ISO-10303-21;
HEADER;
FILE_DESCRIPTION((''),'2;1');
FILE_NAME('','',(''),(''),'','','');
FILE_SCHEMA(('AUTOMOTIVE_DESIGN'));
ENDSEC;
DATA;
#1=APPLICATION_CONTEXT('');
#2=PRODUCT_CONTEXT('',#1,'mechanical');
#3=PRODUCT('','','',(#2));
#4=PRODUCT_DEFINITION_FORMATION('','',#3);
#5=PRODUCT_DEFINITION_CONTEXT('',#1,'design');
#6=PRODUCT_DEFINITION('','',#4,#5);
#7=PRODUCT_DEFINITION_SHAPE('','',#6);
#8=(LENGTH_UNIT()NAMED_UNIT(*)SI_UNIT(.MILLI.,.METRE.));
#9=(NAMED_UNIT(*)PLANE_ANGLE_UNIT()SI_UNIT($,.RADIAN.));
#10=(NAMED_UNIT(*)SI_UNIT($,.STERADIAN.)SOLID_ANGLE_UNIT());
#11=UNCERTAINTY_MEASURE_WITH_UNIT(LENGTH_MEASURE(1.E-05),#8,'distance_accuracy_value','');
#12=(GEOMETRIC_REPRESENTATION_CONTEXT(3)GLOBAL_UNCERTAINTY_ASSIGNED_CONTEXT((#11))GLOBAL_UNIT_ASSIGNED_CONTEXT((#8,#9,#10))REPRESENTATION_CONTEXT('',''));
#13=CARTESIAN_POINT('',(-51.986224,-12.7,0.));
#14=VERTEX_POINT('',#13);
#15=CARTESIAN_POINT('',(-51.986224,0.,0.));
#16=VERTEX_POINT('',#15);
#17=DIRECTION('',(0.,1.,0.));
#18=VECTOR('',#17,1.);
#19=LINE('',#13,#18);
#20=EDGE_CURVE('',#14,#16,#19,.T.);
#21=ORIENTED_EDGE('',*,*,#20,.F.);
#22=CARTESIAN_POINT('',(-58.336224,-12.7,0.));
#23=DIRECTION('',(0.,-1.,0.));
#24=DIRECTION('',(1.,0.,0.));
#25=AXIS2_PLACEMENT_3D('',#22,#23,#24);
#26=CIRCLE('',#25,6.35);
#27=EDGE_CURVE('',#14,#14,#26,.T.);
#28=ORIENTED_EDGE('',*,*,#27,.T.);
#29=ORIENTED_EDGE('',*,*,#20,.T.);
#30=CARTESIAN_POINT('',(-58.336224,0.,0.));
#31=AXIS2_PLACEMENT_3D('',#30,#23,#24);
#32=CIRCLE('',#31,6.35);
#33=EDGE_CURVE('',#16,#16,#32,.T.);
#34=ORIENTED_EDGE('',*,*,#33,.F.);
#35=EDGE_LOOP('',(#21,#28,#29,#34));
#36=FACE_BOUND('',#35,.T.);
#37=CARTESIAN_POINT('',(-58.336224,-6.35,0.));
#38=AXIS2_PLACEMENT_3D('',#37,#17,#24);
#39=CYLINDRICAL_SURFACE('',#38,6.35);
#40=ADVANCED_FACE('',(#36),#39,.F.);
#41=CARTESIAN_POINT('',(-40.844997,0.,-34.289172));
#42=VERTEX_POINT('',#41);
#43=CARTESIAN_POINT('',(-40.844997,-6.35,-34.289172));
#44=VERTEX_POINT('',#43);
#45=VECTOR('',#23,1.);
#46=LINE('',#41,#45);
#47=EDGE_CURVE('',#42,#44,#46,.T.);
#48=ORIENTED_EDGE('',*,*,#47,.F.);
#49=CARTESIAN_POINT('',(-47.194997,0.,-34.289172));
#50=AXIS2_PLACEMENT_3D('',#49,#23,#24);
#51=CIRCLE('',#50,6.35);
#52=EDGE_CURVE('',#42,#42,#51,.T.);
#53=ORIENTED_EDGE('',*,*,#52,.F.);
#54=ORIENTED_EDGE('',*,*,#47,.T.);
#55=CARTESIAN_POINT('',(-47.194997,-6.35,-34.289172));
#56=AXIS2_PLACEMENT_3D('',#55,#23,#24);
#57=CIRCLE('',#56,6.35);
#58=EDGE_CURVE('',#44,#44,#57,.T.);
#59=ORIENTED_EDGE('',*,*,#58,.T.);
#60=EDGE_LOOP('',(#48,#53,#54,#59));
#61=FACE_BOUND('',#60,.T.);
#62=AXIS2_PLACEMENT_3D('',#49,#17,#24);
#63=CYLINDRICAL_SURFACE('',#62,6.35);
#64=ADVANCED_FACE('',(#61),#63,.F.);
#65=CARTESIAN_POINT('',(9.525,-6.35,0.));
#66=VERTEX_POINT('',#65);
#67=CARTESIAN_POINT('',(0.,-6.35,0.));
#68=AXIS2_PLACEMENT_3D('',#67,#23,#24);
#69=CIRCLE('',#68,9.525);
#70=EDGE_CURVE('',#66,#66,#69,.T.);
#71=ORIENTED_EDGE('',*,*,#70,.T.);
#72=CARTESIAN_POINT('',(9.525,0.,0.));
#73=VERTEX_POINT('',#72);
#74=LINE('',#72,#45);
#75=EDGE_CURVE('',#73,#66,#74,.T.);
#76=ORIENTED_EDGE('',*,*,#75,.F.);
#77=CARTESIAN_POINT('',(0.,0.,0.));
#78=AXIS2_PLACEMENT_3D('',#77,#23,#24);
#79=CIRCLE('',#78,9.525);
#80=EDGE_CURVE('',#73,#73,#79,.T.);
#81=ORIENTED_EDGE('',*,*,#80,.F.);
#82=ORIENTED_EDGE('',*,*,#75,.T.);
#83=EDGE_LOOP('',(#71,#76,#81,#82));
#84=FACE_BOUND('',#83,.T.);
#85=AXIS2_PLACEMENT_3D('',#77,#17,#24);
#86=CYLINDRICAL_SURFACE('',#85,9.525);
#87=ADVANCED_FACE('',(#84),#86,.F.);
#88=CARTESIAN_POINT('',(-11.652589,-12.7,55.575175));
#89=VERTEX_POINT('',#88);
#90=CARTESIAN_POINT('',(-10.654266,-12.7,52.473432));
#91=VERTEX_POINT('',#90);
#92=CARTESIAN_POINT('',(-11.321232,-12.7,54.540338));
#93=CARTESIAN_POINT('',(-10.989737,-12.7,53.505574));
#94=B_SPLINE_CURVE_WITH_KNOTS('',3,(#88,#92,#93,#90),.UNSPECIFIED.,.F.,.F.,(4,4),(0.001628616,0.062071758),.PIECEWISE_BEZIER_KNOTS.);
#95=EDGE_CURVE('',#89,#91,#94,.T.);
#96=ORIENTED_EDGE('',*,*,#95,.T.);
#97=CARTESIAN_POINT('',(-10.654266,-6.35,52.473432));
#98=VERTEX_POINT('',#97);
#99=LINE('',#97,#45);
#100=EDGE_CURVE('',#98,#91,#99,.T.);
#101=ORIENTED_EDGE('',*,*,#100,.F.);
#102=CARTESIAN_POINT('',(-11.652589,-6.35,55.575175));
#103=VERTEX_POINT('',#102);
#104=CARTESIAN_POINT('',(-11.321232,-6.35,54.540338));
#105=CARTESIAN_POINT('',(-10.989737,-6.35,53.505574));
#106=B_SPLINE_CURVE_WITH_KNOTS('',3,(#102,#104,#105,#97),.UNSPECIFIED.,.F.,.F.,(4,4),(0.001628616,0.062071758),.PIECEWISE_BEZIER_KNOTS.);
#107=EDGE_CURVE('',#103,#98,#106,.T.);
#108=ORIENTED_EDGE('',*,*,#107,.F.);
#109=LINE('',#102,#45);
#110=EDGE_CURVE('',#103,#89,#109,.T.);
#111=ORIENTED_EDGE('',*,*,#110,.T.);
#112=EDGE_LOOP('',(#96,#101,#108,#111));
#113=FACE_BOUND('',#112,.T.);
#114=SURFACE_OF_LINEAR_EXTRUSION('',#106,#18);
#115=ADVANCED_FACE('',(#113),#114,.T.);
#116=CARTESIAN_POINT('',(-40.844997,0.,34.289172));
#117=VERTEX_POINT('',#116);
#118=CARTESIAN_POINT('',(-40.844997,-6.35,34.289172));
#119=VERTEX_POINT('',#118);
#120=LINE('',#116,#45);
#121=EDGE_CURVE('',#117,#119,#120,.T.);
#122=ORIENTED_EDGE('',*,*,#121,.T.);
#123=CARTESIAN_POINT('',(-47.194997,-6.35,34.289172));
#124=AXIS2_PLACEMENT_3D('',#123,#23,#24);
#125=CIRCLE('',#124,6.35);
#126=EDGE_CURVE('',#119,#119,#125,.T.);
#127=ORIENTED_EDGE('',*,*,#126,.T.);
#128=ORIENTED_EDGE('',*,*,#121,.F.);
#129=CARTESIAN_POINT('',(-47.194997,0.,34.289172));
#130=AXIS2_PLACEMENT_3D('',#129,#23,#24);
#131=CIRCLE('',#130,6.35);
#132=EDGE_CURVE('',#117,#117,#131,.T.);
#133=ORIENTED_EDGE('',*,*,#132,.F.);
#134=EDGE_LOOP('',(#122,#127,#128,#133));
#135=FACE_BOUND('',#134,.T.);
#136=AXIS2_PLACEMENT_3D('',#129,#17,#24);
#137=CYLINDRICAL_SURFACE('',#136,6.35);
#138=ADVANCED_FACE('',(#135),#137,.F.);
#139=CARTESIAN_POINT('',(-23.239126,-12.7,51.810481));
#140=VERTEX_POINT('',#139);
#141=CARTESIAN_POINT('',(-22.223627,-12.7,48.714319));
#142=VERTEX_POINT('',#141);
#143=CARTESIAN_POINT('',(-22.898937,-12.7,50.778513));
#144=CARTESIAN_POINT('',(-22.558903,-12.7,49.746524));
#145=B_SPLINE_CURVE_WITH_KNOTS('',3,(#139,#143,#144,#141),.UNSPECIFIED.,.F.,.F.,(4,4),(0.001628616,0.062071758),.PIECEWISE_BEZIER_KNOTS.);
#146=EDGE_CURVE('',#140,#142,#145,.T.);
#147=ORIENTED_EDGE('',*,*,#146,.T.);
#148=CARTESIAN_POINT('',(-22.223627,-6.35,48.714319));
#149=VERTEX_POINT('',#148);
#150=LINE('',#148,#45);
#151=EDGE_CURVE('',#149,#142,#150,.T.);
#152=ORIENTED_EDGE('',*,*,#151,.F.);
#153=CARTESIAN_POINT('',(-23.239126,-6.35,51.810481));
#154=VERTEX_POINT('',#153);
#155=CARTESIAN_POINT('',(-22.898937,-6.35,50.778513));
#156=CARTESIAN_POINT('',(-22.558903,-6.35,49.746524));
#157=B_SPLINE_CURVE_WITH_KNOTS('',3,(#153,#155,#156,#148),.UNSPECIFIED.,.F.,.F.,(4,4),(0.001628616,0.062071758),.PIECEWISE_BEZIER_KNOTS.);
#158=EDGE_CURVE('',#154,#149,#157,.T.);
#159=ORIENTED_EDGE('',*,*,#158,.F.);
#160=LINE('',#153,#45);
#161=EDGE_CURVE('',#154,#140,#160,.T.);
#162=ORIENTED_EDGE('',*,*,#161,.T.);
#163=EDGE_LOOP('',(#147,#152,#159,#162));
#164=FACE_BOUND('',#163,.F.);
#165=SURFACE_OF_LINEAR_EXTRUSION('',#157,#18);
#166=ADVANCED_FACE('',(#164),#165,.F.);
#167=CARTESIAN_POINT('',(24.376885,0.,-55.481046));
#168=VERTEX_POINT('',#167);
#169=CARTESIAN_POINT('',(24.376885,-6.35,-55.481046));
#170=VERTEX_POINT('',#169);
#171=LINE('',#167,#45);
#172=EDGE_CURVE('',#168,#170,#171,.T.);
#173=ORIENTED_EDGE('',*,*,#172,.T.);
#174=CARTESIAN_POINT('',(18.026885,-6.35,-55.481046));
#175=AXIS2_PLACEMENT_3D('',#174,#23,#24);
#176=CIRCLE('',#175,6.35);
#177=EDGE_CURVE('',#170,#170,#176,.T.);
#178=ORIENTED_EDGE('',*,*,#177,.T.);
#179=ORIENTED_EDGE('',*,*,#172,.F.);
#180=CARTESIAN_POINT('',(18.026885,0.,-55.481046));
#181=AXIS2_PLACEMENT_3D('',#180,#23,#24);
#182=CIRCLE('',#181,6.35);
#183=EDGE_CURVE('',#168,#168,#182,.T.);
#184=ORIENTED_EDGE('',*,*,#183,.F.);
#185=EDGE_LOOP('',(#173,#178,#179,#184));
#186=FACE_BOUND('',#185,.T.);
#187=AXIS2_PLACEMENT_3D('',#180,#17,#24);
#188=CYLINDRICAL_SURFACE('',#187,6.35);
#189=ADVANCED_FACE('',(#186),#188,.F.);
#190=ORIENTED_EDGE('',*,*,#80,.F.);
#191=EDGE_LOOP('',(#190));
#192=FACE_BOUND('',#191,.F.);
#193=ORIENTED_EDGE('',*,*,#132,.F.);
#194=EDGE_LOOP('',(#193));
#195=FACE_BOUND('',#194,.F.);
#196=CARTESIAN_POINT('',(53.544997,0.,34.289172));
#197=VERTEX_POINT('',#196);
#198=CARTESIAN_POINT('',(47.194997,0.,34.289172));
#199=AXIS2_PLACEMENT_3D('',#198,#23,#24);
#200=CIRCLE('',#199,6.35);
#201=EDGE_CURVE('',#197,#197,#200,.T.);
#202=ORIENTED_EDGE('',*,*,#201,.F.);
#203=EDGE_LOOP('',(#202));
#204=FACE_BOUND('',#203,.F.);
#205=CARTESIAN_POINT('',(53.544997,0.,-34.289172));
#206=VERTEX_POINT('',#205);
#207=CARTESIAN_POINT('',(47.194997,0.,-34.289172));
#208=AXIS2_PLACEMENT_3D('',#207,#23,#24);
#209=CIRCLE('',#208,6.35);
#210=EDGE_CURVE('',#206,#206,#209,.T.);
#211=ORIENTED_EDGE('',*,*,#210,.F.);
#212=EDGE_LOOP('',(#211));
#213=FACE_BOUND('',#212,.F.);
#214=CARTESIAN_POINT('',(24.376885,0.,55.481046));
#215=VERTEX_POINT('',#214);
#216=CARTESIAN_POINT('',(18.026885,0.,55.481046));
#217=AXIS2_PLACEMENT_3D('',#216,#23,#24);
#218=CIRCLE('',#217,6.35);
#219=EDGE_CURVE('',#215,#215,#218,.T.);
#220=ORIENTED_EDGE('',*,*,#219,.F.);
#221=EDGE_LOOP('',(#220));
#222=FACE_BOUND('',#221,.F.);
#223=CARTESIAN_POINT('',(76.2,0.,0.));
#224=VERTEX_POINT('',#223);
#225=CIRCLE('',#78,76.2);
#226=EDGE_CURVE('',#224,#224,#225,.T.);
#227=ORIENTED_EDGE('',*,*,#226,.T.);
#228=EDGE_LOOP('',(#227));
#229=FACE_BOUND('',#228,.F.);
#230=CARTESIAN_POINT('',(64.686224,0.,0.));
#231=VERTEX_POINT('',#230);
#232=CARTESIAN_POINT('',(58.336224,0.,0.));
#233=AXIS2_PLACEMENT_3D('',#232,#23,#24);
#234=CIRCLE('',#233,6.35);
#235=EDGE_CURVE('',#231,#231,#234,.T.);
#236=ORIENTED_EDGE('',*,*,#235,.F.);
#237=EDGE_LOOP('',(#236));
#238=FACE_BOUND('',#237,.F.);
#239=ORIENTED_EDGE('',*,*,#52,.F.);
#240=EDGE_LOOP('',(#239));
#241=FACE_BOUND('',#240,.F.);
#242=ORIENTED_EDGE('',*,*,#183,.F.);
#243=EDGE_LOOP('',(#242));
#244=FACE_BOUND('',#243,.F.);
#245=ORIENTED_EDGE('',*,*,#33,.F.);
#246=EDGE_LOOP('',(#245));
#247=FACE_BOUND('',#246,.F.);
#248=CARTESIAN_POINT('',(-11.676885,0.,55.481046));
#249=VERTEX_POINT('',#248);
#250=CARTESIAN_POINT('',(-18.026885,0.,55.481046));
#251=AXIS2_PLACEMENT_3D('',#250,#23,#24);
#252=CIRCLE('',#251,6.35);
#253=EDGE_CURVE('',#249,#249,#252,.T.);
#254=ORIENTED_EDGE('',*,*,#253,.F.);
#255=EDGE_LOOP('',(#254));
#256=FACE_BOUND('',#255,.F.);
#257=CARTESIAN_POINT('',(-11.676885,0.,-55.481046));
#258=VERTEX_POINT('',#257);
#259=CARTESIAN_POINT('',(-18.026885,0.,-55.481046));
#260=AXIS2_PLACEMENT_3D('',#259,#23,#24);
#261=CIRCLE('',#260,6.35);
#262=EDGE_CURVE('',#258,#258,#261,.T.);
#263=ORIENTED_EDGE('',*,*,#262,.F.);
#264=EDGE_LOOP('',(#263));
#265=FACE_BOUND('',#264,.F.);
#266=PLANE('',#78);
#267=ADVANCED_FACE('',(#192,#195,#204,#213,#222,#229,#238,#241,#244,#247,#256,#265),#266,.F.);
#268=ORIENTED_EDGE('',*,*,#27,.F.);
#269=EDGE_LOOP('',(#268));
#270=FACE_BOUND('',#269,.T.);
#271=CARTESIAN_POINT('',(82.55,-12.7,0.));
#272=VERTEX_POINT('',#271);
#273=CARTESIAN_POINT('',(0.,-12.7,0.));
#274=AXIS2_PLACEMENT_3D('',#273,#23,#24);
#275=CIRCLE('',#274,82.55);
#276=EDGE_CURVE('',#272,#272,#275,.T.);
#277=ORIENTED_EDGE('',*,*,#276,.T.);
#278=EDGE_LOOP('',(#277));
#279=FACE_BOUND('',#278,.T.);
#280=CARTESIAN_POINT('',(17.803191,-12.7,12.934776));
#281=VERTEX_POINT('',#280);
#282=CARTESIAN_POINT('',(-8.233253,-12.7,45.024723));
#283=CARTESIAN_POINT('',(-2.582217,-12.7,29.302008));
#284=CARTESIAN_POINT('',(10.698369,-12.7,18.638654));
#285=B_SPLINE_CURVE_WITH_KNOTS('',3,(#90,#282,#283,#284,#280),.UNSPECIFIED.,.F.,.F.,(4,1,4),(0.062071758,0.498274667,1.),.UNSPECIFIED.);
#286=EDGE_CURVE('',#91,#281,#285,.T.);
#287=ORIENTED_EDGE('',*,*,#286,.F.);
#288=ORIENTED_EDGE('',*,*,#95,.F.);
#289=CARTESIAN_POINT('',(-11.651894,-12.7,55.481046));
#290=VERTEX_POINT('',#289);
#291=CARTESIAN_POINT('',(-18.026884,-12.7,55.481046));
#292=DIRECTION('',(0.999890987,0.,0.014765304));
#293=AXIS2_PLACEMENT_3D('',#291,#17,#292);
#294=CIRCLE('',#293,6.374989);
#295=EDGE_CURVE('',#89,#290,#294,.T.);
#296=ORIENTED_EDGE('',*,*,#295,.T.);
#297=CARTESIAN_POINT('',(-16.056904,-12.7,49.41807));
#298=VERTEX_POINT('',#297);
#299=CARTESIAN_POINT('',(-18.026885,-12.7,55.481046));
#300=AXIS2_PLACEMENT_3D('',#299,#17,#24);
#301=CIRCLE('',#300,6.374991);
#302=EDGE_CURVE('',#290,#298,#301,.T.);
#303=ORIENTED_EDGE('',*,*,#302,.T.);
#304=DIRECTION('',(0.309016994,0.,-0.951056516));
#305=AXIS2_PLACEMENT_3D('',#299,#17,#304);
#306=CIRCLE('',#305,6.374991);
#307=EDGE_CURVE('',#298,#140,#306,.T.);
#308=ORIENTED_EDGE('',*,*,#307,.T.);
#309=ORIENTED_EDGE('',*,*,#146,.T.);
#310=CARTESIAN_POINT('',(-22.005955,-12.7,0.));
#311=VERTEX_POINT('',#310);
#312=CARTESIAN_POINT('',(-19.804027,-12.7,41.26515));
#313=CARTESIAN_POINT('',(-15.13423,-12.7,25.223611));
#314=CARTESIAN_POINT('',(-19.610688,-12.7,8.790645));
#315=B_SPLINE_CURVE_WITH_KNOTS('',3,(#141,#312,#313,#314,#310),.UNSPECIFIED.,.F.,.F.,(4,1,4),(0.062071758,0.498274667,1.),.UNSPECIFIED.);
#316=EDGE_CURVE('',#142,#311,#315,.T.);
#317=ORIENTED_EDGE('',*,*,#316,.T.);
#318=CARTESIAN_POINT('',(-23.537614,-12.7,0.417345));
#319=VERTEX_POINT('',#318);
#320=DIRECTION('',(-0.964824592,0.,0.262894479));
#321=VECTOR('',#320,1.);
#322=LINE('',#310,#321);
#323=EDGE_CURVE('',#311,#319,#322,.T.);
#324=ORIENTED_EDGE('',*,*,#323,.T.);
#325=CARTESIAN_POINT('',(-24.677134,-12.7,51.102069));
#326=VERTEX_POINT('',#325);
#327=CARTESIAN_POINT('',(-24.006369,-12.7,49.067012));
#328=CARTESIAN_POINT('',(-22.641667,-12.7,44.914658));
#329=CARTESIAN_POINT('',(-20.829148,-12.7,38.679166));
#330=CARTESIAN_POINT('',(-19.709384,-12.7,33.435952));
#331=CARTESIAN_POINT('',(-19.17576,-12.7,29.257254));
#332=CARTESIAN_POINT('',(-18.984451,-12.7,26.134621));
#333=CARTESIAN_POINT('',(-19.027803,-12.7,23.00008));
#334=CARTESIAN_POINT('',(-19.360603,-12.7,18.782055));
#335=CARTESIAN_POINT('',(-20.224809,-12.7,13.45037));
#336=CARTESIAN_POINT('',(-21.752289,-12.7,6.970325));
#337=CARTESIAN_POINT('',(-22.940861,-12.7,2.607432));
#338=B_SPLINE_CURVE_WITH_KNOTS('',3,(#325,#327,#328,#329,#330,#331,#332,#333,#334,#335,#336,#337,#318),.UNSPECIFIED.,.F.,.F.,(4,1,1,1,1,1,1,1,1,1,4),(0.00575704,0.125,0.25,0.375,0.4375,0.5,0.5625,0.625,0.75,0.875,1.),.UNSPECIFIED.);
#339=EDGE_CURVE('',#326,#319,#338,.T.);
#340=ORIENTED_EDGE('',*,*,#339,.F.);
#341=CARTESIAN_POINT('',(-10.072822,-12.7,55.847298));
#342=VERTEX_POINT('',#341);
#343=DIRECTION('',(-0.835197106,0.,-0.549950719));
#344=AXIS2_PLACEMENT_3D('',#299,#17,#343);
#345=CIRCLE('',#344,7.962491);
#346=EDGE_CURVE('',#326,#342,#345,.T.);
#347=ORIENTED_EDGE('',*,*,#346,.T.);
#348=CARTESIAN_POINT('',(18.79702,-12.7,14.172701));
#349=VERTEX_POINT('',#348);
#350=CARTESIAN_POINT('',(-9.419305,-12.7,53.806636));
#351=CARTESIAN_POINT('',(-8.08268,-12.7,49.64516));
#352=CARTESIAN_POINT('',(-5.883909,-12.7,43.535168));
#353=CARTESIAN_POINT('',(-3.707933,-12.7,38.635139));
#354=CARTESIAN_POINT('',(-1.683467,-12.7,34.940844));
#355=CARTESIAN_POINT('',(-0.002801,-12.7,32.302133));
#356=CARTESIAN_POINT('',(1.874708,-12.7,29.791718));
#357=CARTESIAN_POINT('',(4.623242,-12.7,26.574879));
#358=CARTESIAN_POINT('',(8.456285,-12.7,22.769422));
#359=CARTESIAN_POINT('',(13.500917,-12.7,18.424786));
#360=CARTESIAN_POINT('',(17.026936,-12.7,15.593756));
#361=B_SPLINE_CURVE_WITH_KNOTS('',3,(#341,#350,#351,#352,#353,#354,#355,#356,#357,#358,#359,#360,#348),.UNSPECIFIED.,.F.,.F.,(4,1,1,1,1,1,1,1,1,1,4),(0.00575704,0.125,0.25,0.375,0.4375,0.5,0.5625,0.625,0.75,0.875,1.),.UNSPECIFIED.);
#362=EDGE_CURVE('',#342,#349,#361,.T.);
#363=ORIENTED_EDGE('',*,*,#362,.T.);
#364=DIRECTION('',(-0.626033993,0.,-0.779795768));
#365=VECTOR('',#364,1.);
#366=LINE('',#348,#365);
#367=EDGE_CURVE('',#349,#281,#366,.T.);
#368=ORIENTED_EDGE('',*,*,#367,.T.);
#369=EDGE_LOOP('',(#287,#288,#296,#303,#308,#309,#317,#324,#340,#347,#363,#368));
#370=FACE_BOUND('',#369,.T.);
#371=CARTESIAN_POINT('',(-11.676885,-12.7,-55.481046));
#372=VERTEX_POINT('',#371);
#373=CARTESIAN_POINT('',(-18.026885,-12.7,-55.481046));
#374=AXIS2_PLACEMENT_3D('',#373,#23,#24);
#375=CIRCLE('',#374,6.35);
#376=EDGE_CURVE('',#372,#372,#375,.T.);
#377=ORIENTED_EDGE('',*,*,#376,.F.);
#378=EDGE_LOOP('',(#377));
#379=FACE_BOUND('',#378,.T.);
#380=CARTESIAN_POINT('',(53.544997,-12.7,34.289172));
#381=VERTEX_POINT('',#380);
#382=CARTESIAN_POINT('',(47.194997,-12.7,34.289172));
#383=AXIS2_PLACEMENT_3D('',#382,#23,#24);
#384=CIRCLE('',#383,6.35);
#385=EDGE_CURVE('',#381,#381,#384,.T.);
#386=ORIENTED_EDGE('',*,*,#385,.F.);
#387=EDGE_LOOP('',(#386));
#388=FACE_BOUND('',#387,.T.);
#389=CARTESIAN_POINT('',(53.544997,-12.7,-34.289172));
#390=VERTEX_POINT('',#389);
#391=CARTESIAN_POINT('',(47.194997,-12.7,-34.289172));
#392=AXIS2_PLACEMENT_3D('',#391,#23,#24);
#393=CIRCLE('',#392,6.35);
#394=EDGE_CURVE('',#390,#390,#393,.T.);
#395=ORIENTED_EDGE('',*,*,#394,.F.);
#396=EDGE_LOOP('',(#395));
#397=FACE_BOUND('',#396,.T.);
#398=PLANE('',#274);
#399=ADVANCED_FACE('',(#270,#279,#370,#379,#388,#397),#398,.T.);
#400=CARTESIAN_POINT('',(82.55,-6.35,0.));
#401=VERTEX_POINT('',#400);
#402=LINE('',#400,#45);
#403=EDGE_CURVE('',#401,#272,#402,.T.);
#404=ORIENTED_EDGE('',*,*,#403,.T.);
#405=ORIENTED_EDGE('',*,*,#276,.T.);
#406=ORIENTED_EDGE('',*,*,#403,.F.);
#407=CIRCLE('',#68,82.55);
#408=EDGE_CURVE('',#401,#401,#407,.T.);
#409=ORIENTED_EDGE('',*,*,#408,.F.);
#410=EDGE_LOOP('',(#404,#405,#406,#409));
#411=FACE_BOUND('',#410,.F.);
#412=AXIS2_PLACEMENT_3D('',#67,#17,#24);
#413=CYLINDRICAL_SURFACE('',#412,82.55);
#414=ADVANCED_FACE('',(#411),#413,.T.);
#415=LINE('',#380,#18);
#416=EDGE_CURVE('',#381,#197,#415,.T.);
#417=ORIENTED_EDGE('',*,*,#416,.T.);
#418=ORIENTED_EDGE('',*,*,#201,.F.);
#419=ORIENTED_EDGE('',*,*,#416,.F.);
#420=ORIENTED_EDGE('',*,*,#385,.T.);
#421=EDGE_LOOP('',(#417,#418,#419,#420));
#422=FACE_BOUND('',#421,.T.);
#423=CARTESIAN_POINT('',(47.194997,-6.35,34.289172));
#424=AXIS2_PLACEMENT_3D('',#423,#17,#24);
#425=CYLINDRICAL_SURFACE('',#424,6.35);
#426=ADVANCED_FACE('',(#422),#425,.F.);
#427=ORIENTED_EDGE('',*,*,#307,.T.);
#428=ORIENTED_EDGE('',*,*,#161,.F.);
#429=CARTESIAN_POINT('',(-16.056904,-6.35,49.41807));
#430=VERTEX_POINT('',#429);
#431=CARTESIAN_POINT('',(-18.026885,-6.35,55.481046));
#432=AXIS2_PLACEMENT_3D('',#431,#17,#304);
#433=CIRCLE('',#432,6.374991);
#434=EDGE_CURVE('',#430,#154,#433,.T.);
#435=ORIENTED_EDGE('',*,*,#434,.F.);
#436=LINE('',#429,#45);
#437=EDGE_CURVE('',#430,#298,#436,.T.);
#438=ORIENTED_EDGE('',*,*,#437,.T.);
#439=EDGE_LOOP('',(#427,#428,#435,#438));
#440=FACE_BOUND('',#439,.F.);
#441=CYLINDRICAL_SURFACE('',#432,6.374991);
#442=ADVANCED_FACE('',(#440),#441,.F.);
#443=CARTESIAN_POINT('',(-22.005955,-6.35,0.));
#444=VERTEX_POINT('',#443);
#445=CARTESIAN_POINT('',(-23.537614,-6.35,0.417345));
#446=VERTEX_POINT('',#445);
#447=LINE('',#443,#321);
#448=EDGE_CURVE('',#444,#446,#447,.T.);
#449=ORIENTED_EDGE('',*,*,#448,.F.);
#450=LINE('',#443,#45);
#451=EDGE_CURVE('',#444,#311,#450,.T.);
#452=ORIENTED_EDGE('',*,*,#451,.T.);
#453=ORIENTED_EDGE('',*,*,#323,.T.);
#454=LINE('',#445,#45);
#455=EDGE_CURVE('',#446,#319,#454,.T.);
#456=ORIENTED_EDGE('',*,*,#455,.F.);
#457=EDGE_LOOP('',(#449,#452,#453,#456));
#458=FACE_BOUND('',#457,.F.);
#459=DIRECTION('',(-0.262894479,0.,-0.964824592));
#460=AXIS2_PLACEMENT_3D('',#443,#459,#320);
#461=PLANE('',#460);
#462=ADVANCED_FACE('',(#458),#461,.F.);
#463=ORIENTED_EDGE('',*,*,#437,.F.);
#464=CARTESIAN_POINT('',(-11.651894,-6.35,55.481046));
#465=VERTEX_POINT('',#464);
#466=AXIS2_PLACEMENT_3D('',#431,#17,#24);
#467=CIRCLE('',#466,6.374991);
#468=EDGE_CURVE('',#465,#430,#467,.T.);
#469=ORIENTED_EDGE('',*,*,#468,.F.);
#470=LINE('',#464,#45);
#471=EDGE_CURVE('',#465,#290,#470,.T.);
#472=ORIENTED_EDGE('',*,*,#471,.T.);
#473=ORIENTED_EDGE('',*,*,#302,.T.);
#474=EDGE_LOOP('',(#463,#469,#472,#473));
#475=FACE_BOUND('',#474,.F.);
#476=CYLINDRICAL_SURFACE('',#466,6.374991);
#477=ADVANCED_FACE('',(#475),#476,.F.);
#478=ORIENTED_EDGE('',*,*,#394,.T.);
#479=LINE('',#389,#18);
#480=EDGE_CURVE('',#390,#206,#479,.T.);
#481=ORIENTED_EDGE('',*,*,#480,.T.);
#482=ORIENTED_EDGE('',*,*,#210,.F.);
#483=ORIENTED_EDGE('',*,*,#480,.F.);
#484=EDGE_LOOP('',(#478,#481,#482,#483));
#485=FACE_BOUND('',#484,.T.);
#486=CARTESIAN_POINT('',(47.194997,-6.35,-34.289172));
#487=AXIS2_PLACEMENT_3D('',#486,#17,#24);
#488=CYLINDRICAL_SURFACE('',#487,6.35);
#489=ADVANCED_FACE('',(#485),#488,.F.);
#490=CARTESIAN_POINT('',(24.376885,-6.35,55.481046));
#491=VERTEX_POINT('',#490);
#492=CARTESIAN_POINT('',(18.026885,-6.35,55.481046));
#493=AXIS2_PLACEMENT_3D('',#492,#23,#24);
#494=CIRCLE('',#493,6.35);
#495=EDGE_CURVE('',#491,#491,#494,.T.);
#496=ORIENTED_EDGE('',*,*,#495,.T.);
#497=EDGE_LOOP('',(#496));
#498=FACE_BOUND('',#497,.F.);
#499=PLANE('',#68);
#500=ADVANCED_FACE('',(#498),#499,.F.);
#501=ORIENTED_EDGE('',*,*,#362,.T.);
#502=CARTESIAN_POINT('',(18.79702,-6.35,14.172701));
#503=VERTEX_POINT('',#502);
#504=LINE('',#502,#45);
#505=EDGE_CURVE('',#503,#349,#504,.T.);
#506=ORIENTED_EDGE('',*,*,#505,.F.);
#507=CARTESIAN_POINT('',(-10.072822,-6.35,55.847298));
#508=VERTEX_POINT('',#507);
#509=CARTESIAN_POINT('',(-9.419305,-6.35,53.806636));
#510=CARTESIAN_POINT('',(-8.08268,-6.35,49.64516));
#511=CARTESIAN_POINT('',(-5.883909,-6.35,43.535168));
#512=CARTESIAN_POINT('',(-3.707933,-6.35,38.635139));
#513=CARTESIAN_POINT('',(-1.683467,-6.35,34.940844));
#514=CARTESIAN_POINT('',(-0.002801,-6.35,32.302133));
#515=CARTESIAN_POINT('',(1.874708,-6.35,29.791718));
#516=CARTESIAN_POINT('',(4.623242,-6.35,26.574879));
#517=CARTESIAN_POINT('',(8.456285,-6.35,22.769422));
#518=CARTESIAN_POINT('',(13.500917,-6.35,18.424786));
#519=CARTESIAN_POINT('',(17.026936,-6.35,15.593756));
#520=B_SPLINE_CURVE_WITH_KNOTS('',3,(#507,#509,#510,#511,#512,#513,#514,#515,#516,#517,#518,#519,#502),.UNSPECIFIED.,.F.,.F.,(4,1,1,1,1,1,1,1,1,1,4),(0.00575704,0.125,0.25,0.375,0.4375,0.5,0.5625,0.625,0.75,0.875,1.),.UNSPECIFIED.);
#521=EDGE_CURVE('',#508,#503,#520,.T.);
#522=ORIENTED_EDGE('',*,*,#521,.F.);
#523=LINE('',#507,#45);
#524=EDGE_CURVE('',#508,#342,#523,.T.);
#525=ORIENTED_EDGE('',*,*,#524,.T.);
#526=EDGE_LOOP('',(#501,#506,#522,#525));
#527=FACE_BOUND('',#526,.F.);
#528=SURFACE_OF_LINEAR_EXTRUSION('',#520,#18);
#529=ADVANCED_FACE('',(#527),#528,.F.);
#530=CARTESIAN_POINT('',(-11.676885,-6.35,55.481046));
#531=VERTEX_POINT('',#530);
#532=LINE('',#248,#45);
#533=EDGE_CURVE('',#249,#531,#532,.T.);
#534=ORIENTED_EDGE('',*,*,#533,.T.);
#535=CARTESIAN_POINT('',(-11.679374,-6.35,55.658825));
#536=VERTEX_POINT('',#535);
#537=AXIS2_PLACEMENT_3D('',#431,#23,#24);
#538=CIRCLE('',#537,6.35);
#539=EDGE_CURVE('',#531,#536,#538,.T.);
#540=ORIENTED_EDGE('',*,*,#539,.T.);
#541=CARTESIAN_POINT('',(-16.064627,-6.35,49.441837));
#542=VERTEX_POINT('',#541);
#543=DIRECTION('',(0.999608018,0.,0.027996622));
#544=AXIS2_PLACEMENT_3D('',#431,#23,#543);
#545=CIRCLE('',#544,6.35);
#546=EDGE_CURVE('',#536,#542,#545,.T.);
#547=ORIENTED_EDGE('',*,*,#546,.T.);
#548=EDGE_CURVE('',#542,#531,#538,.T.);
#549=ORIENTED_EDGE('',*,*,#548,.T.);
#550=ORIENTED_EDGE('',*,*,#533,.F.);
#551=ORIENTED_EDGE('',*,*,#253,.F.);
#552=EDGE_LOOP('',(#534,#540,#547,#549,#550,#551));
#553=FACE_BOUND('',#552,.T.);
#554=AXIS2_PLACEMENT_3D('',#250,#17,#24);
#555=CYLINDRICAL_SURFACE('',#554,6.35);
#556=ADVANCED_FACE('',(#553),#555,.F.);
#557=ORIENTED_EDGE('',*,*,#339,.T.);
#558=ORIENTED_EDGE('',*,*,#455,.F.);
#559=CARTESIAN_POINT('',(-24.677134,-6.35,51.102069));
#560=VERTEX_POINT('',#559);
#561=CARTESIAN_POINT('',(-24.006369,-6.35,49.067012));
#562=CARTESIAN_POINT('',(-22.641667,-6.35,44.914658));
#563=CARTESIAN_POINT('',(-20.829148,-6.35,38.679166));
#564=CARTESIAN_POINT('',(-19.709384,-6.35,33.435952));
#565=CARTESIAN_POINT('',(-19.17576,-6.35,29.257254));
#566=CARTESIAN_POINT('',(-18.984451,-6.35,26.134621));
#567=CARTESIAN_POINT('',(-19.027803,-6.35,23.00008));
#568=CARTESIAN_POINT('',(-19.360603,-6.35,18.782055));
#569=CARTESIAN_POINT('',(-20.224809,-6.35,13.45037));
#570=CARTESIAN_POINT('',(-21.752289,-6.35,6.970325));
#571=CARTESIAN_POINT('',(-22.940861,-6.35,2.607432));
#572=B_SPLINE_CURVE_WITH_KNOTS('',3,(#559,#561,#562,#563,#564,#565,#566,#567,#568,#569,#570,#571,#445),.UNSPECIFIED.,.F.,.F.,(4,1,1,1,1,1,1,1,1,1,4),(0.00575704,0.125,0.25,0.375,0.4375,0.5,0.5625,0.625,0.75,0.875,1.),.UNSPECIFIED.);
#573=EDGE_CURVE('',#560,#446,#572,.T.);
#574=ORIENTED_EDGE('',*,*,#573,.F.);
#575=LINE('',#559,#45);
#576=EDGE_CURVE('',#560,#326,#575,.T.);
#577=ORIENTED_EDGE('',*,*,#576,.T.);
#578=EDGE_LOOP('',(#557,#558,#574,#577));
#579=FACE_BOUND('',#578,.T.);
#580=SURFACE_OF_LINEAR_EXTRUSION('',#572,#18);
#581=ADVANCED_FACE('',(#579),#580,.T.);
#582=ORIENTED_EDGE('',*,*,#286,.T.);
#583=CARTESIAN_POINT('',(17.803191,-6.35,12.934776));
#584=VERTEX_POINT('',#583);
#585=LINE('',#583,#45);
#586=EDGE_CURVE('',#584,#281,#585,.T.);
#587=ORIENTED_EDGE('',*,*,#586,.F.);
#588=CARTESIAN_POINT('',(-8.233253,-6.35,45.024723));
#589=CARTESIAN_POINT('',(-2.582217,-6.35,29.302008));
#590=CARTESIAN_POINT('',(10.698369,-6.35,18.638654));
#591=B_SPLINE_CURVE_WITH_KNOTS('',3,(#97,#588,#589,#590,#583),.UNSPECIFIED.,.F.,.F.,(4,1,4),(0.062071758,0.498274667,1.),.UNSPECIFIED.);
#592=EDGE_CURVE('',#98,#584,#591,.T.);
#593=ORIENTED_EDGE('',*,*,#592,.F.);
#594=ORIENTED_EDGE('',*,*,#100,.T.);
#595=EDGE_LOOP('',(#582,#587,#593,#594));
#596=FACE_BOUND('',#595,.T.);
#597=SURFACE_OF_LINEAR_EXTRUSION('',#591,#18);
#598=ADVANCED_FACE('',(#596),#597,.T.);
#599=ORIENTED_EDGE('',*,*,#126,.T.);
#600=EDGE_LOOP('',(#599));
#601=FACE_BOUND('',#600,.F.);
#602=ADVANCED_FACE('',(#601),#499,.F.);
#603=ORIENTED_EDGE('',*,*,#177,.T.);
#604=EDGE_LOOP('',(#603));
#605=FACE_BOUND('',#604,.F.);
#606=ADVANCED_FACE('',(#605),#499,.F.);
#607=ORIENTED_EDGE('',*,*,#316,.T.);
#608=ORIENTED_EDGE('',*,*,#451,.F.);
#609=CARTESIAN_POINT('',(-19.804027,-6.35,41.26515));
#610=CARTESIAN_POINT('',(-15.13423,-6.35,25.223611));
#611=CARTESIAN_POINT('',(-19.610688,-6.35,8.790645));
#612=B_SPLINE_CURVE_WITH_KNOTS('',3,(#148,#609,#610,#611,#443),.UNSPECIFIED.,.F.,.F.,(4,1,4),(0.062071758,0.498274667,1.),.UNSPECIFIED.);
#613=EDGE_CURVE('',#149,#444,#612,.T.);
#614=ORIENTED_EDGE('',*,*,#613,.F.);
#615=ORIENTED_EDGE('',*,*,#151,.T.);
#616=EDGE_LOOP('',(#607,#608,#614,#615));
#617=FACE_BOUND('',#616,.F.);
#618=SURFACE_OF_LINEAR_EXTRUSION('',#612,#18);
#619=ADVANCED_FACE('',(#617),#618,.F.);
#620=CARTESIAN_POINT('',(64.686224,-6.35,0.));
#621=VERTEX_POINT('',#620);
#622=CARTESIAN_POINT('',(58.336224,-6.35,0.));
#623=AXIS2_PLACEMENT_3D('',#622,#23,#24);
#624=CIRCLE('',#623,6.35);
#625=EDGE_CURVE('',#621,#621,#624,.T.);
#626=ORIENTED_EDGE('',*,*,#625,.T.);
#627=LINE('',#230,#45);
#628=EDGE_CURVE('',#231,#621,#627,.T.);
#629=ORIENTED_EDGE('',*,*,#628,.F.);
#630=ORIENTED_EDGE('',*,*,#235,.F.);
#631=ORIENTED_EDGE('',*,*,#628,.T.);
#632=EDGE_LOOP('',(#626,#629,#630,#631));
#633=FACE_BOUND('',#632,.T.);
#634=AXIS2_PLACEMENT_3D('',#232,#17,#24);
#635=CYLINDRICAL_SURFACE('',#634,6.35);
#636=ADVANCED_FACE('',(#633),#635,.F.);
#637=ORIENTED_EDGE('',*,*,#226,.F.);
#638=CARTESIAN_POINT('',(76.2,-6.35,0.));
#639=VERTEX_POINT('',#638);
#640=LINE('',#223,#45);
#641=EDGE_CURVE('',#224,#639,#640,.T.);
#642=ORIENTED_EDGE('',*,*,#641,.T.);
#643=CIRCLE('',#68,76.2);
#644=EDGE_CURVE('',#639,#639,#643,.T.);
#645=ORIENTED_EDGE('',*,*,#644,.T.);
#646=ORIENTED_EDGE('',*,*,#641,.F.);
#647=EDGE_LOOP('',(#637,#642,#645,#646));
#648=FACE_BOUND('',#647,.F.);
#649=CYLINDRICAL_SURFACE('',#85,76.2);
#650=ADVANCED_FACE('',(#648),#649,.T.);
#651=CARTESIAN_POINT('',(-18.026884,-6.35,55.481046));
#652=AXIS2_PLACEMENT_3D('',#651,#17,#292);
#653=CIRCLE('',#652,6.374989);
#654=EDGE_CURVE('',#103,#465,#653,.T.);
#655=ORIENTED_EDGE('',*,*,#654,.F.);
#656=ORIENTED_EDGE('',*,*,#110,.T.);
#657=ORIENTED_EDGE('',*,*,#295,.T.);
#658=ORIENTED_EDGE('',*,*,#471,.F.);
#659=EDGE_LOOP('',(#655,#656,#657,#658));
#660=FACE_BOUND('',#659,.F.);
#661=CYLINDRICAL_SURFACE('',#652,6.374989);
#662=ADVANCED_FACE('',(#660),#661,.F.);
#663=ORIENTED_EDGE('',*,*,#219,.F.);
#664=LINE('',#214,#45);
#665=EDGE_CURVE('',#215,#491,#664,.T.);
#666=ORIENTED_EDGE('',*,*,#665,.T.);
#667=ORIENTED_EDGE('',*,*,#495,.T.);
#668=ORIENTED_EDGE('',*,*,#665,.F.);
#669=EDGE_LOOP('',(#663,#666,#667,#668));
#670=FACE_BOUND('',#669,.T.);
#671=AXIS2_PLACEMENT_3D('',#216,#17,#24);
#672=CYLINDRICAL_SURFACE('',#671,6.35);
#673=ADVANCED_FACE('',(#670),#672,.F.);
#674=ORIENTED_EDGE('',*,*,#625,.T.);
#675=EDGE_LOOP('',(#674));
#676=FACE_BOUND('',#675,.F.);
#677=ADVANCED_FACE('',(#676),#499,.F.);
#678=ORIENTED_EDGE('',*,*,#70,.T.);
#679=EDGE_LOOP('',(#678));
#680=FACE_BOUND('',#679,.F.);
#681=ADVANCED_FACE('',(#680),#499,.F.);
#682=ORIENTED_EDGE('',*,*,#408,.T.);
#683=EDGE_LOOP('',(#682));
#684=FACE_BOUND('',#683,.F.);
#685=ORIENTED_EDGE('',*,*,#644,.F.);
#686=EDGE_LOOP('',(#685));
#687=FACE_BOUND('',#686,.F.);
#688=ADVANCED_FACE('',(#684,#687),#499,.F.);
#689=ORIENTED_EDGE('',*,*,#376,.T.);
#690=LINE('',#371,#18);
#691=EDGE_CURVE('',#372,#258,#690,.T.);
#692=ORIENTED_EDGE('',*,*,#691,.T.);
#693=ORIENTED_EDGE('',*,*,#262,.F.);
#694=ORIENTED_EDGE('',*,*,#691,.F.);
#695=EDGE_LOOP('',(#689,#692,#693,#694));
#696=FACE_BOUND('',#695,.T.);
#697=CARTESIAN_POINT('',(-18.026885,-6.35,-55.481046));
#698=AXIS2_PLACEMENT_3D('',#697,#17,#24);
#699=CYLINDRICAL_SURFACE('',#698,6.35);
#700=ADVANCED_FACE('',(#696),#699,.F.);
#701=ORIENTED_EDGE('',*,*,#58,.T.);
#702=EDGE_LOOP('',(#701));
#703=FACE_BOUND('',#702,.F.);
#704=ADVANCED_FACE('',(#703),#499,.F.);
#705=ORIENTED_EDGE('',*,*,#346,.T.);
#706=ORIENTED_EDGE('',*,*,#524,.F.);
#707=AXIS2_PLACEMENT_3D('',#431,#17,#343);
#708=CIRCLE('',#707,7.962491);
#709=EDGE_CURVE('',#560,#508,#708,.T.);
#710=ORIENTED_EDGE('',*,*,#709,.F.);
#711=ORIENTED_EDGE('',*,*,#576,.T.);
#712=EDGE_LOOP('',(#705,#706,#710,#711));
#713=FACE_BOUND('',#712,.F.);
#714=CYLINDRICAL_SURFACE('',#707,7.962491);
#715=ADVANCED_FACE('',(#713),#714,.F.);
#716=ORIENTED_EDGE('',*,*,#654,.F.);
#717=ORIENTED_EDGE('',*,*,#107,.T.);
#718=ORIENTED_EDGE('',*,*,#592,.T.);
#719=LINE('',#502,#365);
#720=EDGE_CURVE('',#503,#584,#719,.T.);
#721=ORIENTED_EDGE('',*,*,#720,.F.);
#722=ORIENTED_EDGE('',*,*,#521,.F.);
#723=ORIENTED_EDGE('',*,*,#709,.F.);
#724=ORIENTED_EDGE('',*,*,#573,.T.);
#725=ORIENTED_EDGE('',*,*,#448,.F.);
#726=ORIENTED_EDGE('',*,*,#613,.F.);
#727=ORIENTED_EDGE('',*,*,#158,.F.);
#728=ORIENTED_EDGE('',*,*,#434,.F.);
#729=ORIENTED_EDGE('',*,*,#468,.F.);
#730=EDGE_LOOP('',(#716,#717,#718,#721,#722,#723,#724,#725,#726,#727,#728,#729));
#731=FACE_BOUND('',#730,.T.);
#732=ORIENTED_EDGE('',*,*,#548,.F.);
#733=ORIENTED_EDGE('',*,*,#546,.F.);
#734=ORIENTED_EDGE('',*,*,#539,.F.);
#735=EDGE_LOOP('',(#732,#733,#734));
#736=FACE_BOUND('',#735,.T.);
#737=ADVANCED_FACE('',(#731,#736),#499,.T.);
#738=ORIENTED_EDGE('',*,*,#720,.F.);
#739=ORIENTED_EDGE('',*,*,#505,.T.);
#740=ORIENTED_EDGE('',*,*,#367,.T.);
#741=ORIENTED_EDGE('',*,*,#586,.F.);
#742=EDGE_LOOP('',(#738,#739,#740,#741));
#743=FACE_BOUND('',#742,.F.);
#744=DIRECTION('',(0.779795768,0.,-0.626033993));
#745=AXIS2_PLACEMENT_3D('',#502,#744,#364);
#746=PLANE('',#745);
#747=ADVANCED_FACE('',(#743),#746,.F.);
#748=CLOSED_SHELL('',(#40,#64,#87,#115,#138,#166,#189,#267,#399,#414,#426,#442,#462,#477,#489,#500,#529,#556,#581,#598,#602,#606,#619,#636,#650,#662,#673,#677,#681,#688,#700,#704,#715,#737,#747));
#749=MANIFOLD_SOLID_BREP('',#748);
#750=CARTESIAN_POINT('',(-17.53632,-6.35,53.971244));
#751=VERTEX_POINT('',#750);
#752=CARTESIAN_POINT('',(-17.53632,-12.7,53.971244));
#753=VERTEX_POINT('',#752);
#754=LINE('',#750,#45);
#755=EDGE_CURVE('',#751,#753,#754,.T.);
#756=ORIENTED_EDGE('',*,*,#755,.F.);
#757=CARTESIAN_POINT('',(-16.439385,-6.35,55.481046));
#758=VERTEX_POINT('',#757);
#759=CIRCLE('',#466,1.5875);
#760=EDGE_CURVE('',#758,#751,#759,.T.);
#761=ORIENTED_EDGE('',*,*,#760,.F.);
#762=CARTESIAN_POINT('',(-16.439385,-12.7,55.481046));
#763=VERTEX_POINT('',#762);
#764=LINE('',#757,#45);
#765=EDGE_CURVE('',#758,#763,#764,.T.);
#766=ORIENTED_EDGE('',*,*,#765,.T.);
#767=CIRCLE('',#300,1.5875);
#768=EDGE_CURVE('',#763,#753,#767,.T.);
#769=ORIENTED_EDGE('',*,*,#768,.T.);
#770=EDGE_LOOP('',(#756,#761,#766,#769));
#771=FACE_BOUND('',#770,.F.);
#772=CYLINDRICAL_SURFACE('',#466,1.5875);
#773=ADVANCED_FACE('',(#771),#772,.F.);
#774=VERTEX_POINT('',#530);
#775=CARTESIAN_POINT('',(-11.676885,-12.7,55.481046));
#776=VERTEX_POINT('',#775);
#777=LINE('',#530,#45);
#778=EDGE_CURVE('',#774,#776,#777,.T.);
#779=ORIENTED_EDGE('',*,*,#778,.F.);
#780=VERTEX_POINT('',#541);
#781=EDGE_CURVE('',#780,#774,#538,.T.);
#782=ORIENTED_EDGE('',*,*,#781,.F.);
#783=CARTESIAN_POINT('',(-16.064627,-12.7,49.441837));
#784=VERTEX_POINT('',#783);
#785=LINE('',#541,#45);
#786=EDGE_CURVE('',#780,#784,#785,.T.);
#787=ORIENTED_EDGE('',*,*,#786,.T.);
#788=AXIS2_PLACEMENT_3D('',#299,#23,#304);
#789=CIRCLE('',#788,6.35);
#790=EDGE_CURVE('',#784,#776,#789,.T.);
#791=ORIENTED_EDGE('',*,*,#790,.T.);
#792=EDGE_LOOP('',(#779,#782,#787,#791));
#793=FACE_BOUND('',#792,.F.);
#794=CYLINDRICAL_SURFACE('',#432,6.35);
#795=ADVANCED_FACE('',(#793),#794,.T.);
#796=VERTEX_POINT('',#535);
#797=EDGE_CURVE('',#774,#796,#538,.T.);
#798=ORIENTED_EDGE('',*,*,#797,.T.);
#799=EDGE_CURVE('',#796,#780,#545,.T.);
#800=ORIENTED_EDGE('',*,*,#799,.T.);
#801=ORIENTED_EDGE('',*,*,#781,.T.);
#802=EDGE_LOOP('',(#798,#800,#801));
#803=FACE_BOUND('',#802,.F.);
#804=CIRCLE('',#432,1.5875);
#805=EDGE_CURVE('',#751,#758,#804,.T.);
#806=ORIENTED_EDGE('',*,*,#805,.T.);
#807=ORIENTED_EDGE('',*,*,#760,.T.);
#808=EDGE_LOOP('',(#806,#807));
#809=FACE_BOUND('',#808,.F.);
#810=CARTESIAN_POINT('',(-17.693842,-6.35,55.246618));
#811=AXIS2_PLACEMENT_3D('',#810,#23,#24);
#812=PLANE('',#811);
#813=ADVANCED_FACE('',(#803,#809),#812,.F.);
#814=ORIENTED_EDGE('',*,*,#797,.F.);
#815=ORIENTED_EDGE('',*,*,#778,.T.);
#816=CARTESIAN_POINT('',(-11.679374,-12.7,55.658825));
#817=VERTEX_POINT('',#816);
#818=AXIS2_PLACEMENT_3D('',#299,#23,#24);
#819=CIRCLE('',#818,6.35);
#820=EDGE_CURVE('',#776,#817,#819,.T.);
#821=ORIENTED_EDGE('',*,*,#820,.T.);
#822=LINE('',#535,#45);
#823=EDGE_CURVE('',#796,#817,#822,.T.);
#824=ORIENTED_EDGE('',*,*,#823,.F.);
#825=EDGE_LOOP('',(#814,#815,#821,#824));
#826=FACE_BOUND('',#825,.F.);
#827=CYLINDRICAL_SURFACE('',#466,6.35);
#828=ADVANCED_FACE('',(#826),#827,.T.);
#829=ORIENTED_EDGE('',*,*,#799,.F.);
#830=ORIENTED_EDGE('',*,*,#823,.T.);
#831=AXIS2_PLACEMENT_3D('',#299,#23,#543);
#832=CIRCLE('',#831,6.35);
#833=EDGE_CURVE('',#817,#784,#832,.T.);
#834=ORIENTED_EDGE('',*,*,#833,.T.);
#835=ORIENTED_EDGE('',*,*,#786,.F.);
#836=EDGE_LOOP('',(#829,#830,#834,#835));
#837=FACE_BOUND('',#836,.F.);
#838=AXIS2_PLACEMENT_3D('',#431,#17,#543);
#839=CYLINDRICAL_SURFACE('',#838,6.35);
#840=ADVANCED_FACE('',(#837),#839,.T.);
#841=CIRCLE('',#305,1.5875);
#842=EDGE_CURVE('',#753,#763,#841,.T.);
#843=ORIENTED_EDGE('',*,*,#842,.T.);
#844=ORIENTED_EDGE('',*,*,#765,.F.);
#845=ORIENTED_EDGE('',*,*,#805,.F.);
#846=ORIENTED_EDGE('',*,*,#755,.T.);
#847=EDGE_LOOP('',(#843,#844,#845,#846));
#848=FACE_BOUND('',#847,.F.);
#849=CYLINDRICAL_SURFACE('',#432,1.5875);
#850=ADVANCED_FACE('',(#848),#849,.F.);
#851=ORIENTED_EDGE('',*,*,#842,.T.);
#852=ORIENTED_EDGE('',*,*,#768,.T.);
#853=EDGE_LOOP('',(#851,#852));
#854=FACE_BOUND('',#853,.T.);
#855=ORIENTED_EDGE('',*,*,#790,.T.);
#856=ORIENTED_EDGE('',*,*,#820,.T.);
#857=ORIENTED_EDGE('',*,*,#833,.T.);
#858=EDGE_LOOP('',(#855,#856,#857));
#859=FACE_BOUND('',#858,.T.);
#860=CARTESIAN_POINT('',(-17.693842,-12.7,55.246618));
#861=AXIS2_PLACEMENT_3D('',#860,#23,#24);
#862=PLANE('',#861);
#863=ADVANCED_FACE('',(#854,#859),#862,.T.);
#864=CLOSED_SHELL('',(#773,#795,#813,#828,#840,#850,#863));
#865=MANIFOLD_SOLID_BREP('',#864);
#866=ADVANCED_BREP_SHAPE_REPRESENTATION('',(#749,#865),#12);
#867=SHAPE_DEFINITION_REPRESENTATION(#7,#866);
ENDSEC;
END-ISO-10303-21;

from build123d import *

# Parameters (mm, degrees)
F0_R     = 76.2
F0_R_2   = 6.35
F0_R_3   = 9.525
F1_DEPTH = 6.35
F2_R     = 82.55
F2_R_2   = 76.2
F2_R_3   = 6.35
F3_DEPTH = 6.35


# Not quite as in the source:
# - a length typed as a fraction of an inch, garbled in the dataset ("3 / 203.2 mm" for 3/8 in), is restored
# - the dataset's text gives a spline's control points without its knots; the knots are read off the source's solid


with BuildPart() as f1:
    # F0 (on Front) → F1 (new body)
    with BuildSketch(Plane.XZ):
        Circle(F0_R)
        with Locations((-18.0268847294, -55.4810463583)):
            Circle(F0_R_2, mode=Mode.SUBTRACT)
        with Locations((-47.1949969329, -34.2891723808)):
            Circle(F0_R_2, mode=Mode.SUBTRACT)
        with Locations((18.0268847294, -55.4810463583)):
            Circle(F0_R_2, mode=Mode.SUBTRACT)
        with Locations((47.1949969329, -34.2891723808)):
            Circle(F0_R_2, mode=Mode.SUBTRACT)
        with Locations((-58.336224407, 0)):
            Circle(F0_R_2, mode=Mode.SUBTRACT)
        with Locations((-47.1949969329, 34.2891723808)):
            Circle(F0_R_2, mode=Mode.SUBTRACT)
        with Locations((-18.0268847294, 55.4810463583)):
            Circle(F0_R_2, mode=Mode.SUBTRACT)
        Circle(F0_R_3, mode=Mode.SUBTRACT)
        with Locations((58.336224407, 0)):
            Circle(F0_R_2, mode=Mode.SUBTRACT)
        with Locations((47.1949969329, 34.2891723808)):
            Circle(F0_R_2, mode=Mode.SUBTRACT)
        with Locations((18.0268847294, 55.4810463583)):
            Circle(F0_R_2, mode=Mode.SUBTRACT)
    extrude(amount=F1_DEPTH)

    # F2 (on face) → F3 (join)
    with BuildSketch(Plane.XZ.offset(6.35)):
        Circle(F2_R)
        Circle(F2_R_2, mode=Mode.SUBTRACT)
        Circle(F2_R_2)
        with Locations((-18.0268847294, -55.4810463583)):
            Circle(F2_R_3, mode=Mode.SUBTRACT)
        with Locations((-47.1949969329, -34.2891723808)):
            Circle(F2_R_3, mode=Mode.SUBTRACT)
        with Locations((18.0268847294, -55.4810463583)):
            Circle(F2_R_3, mode=Mode.SUBTRACT)
        with Locations((47.1949969329, -34.2891723808)):
            Circle(F2_R_3, mode=Mode.SUBTRACT)
        with Locations((-58.336224407, 0)):
            Circle(F2_R_3, mode=Mode.SUBTRACT)
        with Locations((-47.1949969329, 34.2891723808)):
            Circle(F2_R_3, mode=Mode.SUBTRACT)
        with BuildLine():
            add(Edge.make_bspline(
                [(-10.6542657196, 52.4734320289), (-8.2332526855, 45.0247226448), (-2.5822173462, 29.3020077299), (10.6983686228, 18.6386544846), (17.8031913761, 12.934775669)],
                knots=[0.0620717582, 0.0620717582, 0.0620717582, 0.0620717582, 0.4982746672, 1, 1, 1, 1], degree=3))
            ThreePointArc((-10.6542657196, 52.4734320289), (-12.6062796926, 49.6485258008), (-15.5663398463, 47.908267879))
            ThreePointArc((-15.5663398463, 47.908267879), (-18.9839767566, 47.5762864081), (-22.223627454, 48.7143185285))
            add(Edge.make_bspline(
                [(-22.223627454, 48.7143185285), (-19.8040266177, 41.2651502936), (-15.13423029, 25.2236114971), (-19.6106882565, 8.7906449303), (-22.0059547573, 0)],
                knots=[0.0620717582, 0.0620717582, 0.0620717582, 0.0620717582, 0.4982746672, 1, 1, 1, 1], degree=3))
            Line((-22.0059547573, 0), (-23.5376137966, 0.4173449862))
            add(Edge.make_bspline(
                [(-24.6771337574, 51.1020689794), (-24.0063692851, 49.0670118083), (-22.6416674455, 44.9146579119), (-20.8291476072, 38.6791660774), (-19.7093838867, 33.4359520654), (-19.1757596195, 29.2572537264), (-18.9844511798, 26.1346205763), (-19.0278027605, 23.000080355), (-19.360603347, 18.7820552575), (-20.2248090599, 13.4503695291), (-21.7522886479, 6.9703254819), (-22.940861019, 2.6074318834), (-23.5376137966, 0.4173449862)],
                knots=[0.0057570398, 0.0057570398, 0.0057570398, 0.0057570398, 0.125, 0.25, 0.375, 0.4375, 0.5, 0.5625, 0.625, 0.75, 0.875, 1, 1, 1, 1], degree=3))
            ThreePointArc((-24.6771337574, 51.1020689794), (-20.4874296126, 63.0538248376), (-10.0728219256, 55.8472975435))
            add(Edge.make_bspline(
                [(-10.0728219256, 55.8472975435), (-9.4193051901, 53.806636243), (-8.0826797879, 49.645159759), (-5.8839089986, 43.5351684662), (-3.7079330074, 38.6351386244), (-1.6834668507, 34.9408441793), (-0.0028009157, 32.3021326141), (1.8747077646, 29.7917177253), (4.623242041, 26.5748790154), (8.4562853904, 22.7694220255), (13.5009166607, 18.424786242), (17.0269364225, 15.5937564872), (18.7970203404, 14.1727014502)],
                knots=[0.0057570398, 0.0057570398, 0.0057570398, 0.0057570398, 0.125, 0.25, 0.375, 0.4375, 0.5, 0.5625, 0.625, 0.75, 0.875, 1, 1, 1, 1], degree=3))
            Line((18.7970203404, 14.1727014502), (17.8031913761, 12.934775669))
        make_face(mode=Mode.SUBTRACT)
        with BuildLine():
            ThreePointArc((9.525, 0), (-5.5986545281, -7.7058868714), (-2.9433868714, 9.0588133177))
            ThreePointArc((-2.9433868714, 9.0588133177), (5.5986545281, 7.7058868714), (9.525, 0))
        make_face(mode=Mode.SUBTRACT)
        with Locations((58.336224407, 0)):
            Circle(F2_R_3, mode=Mode.SUBTRACT)
        with Locations((47.1949969329, 34.2891723808)):
            Circle(F2_R_3, mode=Mode.SUBTRACT)
        with Locations((18.0268847294, 55.4810463583)):
            Circle(F2_R_3, mode=Mode.SUBTRACT)
        with BuildLine():
            ThreePointArc((9.525, 0), (5.5986545281, 7.7058868714), (-2.9433868714, 9.0588133177))
            ThreePointArc((-2.9433868714, 9.0588133177), (-5.5986545281, -7.7058868714), (9.525, 0))
        make_face()
        with BuildLine():
            ThreePointArc((6.35, 0), (-3.7324363521, -5.1372579143), (-1.9622579143, 6.0392088785))
            ThreePointArc((-1.9622579143, 6.0392088785), (3.7324363521, 5.1372579143), (6.35, 0))
        make_face(mode=Mode.SUBTRACT)
        with BuildLine():
            ThreePointArc((-11.6768847294, 55.4810463583), (-11.6775070317, 55.5699443457), (-11.6793738167, 55.6588249089))
            ThreePointArc((-11.6793738167, 55.6588249089), (-19.9891426437, 61.5202552368), (-23.26662454, 51.8938989238))
            ThreePointArc((-23.26662454, 51.8938989238), (-20.0734973519, 49.4699003134), (-16.0646268151, 49.4418374798))
            ThreePointArc((-16.0646268151, 49.4418374798), (-12.8896268151, 51.7486100062), (-11.6768847294, 55.4810463583))
        make_face()
        with BuildLine():
            ThreePointArc((-16.4393847294, 55.4810463583), (-16.7425702509, 54.5479372703), (-17.5363202509, 53.9712441387))
            ThreePointArc((-17.5363202509, 53.9712441387), (-19.311199208, 56.4141554463), (-16.4393847294, 55.4810463583))
        make_face(mode=Mode.SUBTRACT)
        with BuildLine():
            ThreePointArc((6.35, 0), (3.7324363521, 5.1372579143), (-1.9622579143, 6.0392088785))
            ThreePointArc((-1.9622579143, 6.0392088785), (-3.7324363521, -5.1372579143), (6.35, 0))
        make_face()
        with Locations((-47.1949969329, -34.2891723808)):
            Circle(F2_R_3)
        with Locations((18.0268847294, -55.4810463583)):
            Circle(F2_R_3)
        with Locations((-47.1949969329, 34.2891723808)):
            Circle(F2_R_3)
        with Locations((58.336224407, 0)):
            Circle(F2_R_3)
        with Locations((18.0268847294, 55.4810463583)):
            Circle(F2_R_3)
        with BuildLine():
            ThreePointArc((-11.6525891829, 55.5751750194), (-11.6520679675, 55.5281119716), (-11.6518942259, 55.4810463583))
            ThreePointArc((-11.6518942259, 55.4810463583), (-12.8694090731, 51.7339209568), (-16.0569043249, 49.4180700986))
            Line((-16.0569043249, 49.4180700986), (-15.5663398463, 47.908267879))
            ThreePointArc((-15.5663398463, 47.908267879), (-12.6062796926, 49.6485258008), (-10.6542657196, 52.4734320289))
            add(Edge.make_bspline(
                [(-11.6525891829, 55.5751750194), (-11.3212318788, 54.5403378936), (-10.9897372013, 53.5055741688), (-10.6542657196, 52.4734320289)],
                knots=[0.0016286156, 0.0016286156, 0.0016286156, 0.0016286156, 0.0620717582, 0.0620717582, 0.0620717582, 0.0620717582], degree=3))
        make_face()
        with BuildLine():
            Line((-15.5663398463, 47.908267879), (-16.0569043249, 49.4180700986))
            ThreePointArc((-16.0569043249, 49.4180700986), (-20.0415735031, 49.4327794111), (-23.2391255926, 51.8104811288))
            add(Edge.make_bspline(
                [(-23.2391255926, 51.8104811288), (-22.8989372817, 50.778513371), (-22.5589032523, 49.7465242498), (-22.223627454, 48.7143185285)],
                knots=[0.0016286156, 0.0016286156, 0.0016286156, 0.0016286156, 0.0620717582, 0.0620717582, 0.0620717582, 0.0620717582], degree=3))
            ThreePointArc((-22.223627454, 48.7143185285), (-18.9839767566, 47.5762864081), (-15.5663398463, 47.908267879))
        make_face()
    extrude(amount=F3_DEPTH)


solid = f1.part
